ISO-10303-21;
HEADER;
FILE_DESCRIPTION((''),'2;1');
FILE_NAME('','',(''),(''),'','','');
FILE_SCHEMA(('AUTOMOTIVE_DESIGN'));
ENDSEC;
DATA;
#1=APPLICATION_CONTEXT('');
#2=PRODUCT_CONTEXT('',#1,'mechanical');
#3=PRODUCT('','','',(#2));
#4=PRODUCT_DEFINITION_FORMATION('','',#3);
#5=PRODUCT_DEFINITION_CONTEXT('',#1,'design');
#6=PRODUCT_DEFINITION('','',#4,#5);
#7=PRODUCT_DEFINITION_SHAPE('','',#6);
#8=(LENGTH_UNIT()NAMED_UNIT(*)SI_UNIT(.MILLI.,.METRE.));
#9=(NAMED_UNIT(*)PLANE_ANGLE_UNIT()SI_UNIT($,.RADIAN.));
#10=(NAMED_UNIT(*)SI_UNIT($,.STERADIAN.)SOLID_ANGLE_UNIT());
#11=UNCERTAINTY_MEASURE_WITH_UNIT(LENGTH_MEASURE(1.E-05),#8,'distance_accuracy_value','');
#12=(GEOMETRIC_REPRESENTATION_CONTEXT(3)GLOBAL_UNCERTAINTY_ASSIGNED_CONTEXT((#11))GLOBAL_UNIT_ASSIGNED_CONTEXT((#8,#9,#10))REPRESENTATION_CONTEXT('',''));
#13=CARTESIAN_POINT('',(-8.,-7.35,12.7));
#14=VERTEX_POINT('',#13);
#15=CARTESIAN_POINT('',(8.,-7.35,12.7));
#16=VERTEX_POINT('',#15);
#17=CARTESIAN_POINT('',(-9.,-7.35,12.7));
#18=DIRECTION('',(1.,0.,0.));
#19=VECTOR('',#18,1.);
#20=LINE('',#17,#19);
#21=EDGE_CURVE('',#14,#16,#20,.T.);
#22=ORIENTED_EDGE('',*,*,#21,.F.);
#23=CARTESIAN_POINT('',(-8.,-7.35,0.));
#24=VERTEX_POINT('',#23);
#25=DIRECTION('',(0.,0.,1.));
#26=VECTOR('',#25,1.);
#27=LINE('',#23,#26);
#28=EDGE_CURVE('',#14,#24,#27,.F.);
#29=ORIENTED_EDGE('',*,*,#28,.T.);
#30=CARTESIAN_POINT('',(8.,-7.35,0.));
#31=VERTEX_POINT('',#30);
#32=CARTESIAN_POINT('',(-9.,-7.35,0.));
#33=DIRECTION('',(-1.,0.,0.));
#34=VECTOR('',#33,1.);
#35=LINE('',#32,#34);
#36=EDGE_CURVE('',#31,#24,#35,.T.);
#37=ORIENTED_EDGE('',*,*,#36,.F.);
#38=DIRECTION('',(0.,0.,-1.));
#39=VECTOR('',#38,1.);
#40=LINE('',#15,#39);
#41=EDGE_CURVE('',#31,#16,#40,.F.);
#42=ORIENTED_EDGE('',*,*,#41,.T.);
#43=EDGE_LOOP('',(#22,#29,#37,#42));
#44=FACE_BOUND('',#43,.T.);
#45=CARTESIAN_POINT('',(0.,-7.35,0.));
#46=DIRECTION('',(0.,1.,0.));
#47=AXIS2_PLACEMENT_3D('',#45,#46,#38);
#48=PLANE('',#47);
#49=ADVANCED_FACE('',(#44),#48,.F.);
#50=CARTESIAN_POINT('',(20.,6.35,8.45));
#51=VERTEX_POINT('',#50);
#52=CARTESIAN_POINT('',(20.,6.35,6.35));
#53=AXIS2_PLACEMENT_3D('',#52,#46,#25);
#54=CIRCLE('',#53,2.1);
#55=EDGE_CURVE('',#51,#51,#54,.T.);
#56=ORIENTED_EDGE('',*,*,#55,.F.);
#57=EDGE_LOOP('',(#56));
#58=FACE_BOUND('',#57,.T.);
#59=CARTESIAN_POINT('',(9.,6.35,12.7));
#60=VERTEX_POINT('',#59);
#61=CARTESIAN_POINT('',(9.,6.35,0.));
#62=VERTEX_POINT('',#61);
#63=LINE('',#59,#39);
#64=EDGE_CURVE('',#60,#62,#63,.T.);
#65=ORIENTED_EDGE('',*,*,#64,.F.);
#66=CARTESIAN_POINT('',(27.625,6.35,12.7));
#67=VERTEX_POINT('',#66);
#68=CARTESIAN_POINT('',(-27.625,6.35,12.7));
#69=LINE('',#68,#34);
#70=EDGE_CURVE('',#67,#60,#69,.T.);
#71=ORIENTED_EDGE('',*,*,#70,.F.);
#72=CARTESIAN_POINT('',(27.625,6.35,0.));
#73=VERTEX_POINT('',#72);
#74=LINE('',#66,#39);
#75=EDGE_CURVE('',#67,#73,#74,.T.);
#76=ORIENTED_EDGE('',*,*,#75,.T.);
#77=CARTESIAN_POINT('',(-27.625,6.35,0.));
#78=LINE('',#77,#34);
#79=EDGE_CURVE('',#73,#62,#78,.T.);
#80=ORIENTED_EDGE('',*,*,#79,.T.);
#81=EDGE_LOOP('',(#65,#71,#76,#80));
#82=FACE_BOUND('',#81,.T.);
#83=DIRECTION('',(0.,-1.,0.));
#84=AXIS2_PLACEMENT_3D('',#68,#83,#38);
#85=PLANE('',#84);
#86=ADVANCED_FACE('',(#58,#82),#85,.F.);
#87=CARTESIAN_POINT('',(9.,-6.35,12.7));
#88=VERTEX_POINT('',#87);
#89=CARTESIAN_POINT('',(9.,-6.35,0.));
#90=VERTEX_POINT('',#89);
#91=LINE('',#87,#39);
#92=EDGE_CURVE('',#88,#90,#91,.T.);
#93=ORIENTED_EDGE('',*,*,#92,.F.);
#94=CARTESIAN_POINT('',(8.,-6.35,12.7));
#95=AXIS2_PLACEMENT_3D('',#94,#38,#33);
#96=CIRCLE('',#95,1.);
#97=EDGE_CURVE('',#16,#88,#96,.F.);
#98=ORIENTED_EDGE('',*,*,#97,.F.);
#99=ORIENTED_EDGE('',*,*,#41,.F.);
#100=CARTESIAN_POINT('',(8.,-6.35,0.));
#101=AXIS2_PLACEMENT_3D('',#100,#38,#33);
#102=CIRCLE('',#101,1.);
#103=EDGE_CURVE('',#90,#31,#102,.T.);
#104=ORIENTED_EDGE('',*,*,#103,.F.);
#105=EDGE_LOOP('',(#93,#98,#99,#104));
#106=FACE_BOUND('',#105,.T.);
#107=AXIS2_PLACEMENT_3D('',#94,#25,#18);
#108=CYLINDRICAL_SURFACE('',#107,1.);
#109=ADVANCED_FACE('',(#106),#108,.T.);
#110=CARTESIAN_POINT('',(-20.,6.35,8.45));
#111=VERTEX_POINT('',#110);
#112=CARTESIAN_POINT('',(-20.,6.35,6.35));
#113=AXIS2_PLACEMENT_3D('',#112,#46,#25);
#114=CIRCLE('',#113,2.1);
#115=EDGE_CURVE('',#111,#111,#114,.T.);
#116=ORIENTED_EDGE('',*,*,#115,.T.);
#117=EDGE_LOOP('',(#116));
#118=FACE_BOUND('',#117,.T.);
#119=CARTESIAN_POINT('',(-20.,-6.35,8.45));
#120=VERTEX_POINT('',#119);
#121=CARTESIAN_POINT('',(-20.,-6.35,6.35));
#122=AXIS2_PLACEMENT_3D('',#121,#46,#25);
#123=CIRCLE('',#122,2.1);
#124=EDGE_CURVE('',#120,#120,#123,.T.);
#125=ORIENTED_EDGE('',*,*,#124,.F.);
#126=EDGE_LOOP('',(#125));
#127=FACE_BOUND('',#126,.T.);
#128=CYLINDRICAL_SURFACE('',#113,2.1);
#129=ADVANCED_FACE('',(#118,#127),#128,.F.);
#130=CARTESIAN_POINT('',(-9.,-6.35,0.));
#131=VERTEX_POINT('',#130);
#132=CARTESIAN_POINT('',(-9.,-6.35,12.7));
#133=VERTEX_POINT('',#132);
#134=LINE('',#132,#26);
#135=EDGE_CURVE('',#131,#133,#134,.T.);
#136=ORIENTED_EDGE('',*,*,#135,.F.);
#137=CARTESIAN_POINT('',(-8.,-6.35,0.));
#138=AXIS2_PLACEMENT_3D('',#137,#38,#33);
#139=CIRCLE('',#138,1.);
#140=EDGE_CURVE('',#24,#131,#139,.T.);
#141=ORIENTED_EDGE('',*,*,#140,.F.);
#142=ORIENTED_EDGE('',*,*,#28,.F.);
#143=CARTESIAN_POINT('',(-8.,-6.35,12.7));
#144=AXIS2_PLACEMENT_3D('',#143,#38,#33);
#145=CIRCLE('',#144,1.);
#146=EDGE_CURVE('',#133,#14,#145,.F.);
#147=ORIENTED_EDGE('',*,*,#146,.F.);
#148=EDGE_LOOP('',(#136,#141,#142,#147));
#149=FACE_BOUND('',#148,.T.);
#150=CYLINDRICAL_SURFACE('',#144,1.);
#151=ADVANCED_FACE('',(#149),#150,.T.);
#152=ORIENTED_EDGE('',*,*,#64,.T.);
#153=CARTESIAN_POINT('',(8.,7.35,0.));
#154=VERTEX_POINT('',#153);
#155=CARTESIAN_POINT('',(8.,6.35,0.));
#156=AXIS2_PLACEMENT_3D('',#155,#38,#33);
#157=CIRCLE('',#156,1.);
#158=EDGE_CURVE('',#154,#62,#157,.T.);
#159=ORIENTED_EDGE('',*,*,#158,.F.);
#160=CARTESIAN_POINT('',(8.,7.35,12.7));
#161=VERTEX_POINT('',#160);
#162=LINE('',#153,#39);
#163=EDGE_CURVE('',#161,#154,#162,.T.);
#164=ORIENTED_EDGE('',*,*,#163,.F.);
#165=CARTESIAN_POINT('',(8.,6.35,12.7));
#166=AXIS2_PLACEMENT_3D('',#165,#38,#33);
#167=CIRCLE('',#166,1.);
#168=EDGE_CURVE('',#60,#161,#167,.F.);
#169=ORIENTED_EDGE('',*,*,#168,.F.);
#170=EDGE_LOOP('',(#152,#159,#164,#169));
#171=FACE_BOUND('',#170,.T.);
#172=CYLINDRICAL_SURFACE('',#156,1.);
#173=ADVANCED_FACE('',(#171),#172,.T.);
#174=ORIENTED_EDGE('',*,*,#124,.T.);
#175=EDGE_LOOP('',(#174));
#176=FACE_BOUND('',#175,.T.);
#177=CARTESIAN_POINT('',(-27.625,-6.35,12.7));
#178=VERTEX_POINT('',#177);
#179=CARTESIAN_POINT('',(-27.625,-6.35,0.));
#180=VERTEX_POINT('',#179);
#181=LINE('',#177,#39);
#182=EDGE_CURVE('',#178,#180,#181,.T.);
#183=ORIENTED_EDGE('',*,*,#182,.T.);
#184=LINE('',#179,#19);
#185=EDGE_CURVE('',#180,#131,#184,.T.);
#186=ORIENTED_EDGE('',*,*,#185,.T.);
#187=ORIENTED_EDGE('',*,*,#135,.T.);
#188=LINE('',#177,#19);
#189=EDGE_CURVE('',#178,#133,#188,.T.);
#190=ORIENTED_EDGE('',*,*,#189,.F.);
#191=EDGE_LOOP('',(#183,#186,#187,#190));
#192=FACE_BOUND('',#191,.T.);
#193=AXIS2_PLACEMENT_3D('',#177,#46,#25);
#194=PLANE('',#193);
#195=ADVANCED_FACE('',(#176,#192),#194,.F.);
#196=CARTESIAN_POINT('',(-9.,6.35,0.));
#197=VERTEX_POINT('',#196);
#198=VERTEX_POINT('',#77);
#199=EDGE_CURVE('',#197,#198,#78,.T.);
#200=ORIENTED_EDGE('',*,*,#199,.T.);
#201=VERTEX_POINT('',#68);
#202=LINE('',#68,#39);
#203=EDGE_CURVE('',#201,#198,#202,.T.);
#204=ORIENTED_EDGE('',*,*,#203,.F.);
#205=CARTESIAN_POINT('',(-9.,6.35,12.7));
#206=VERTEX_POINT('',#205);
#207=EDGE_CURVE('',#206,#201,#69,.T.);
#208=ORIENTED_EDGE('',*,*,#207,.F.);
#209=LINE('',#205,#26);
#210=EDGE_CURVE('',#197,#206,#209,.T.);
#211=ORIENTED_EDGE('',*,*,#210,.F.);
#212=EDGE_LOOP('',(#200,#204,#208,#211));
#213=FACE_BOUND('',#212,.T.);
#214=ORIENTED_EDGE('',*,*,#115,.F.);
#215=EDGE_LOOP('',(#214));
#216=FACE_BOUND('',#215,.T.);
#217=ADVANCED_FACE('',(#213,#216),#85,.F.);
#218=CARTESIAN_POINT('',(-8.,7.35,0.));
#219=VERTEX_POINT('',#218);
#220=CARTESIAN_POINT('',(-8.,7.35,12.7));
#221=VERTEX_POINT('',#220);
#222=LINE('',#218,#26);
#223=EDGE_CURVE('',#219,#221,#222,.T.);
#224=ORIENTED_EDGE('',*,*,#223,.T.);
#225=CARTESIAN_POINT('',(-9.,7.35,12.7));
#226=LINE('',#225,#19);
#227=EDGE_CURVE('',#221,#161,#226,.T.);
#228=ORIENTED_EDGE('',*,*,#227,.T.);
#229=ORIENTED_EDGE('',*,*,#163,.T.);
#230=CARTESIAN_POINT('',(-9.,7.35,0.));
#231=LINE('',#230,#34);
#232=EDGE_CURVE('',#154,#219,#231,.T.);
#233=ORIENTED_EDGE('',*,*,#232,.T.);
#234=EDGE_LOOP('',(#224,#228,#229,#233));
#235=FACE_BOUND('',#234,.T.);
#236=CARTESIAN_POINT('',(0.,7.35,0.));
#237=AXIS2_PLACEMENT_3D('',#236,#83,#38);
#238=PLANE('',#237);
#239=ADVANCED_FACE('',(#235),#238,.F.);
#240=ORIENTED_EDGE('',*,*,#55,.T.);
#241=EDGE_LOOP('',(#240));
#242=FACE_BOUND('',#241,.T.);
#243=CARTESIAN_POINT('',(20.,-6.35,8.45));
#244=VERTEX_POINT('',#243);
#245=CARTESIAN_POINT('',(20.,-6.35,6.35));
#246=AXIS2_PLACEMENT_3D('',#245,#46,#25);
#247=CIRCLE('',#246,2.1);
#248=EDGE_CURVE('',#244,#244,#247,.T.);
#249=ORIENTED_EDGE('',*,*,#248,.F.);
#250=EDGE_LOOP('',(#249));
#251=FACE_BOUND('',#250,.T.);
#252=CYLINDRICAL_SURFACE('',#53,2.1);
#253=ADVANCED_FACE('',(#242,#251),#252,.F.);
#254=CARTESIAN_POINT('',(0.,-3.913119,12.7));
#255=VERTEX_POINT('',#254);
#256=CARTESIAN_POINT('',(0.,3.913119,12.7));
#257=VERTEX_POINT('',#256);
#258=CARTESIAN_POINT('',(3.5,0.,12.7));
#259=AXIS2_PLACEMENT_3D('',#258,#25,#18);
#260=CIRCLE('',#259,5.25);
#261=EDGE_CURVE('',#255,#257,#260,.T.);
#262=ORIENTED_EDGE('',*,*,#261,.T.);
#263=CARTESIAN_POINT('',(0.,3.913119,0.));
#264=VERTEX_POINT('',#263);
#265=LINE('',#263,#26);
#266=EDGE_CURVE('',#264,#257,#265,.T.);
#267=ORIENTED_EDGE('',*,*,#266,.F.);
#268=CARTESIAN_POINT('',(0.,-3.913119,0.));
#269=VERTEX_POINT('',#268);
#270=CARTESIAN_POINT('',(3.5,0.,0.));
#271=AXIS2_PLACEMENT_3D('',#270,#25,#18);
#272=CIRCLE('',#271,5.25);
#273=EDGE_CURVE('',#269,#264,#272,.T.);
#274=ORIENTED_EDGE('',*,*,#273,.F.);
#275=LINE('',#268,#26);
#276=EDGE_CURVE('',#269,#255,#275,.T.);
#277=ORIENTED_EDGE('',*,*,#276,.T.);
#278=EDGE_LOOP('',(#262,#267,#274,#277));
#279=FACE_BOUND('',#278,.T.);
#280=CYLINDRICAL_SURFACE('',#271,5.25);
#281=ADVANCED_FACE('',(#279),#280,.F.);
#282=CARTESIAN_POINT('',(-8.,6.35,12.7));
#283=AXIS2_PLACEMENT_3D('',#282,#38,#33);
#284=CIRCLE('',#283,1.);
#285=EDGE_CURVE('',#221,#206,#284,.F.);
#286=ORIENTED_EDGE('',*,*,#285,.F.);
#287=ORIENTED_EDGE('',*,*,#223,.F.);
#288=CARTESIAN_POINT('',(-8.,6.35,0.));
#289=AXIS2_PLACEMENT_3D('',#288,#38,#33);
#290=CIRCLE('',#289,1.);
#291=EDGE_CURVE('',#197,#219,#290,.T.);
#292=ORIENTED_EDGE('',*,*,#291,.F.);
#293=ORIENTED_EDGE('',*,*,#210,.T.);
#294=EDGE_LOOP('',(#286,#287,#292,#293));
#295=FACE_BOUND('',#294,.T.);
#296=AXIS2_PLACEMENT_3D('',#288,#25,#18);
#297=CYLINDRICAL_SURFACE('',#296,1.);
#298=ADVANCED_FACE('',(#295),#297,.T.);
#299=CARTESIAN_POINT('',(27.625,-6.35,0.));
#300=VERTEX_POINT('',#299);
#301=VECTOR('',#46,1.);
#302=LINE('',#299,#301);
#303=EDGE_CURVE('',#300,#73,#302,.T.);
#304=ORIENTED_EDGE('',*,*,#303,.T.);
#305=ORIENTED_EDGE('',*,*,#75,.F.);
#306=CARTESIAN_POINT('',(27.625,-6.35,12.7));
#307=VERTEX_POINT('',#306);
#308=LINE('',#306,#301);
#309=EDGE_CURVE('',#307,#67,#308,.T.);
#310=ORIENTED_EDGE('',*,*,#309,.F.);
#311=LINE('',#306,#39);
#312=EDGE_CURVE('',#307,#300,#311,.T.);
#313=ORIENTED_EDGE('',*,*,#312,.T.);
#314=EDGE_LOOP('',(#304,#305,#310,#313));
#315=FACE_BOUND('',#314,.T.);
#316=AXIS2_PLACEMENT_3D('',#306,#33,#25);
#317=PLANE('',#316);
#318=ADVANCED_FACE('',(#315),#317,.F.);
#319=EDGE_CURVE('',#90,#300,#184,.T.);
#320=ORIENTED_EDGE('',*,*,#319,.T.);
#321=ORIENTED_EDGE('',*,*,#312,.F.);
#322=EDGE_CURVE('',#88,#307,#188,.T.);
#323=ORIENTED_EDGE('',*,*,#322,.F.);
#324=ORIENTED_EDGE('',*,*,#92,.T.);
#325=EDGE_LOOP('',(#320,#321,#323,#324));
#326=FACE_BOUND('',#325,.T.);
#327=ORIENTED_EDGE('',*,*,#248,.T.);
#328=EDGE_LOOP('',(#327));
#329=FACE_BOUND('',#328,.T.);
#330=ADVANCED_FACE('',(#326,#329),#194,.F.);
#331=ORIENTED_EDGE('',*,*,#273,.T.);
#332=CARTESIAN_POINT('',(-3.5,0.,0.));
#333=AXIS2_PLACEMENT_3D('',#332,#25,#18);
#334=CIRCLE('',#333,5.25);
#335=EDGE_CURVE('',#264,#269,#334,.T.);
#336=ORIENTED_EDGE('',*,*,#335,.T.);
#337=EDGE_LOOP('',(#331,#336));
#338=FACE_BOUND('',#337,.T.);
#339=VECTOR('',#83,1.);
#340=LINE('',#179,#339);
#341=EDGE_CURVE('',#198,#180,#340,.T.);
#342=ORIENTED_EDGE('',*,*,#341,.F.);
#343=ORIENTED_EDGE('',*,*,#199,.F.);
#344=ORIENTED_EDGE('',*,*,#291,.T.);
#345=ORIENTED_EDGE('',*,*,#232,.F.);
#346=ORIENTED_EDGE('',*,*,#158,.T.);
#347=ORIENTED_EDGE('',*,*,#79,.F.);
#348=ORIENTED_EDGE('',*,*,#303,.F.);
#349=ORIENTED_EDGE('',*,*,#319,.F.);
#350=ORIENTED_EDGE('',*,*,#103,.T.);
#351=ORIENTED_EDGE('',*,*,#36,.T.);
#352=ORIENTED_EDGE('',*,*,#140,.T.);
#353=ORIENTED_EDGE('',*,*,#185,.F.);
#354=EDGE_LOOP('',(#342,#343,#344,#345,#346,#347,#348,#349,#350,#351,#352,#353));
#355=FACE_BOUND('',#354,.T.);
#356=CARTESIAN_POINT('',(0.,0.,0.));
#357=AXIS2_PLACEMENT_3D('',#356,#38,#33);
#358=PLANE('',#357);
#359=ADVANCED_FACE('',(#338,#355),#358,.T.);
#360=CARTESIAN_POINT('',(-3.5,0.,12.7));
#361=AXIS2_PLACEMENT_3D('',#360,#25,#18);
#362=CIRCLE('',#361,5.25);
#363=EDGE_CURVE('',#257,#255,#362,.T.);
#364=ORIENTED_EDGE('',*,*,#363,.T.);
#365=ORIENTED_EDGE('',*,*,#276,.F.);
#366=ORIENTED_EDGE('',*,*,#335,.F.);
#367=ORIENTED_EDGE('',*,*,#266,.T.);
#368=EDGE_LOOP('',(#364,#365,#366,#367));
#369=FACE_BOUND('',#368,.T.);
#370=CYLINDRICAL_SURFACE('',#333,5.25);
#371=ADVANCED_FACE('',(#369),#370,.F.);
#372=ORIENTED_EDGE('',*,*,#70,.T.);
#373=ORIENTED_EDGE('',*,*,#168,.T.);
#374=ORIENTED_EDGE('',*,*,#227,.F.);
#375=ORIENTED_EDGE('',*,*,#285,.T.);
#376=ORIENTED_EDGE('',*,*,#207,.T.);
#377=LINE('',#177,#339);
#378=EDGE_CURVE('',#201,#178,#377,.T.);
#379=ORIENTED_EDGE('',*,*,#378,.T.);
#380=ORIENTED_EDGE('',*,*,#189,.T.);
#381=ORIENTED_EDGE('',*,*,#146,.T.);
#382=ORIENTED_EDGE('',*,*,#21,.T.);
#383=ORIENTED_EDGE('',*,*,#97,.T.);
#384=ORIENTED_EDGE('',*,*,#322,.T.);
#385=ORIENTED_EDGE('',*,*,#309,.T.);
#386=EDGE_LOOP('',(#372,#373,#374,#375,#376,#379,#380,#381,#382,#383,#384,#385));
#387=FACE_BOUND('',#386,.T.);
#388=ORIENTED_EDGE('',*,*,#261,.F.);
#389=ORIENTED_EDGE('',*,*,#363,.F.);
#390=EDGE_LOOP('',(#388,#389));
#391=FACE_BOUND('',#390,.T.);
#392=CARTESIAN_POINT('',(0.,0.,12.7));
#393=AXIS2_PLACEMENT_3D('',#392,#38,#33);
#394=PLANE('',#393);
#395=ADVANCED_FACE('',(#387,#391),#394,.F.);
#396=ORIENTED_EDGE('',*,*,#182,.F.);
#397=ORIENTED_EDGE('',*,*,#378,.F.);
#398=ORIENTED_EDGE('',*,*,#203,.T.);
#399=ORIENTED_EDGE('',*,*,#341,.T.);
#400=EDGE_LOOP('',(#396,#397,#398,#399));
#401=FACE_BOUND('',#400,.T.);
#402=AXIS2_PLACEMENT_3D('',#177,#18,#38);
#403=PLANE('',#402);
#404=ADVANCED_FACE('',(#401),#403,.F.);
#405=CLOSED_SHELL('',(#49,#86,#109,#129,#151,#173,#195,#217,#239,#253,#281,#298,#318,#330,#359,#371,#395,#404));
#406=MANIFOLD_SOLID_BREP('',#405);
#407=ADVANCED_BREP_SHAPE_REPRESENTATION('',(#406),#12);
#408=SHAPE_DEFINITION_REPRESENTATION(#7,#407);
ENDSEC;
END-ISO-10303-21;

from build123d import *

# Parameters (mm, degrees)
SKETCH1_W             = 55.25
SKETCH1_H             = 12.7
BOSS_EXTRUDE1_DEPTH   = 12.7
M5X0_8_TAPPED_HOLE1_D = 4.2
CUT_EXTRUDE1_DEPTH    = 32.060475286
SKETCH5_W             = 18
SKETCH5_H             = 12.7
BOSS_EXTRUDE2_DEPTH   = 1
FILLET1_R             = 1


with BuildPart() as part:
    # Sketch1 → Boss-Extrude1 (new body)
    with BuildSketch(Plane.XY):
        Rectangle(SKETCH1_W, SKETCH1_H)
    extrude(amount=BOSS_EXTRUDE1_DEPTH)

    # M5x0.8 Tapped Hole1 (through all)
    with Locations(Plane(origin=(-20, 6.35, 6.35), x_dir=(0, 0, 1), z_dir=(0, 1, 0))):
        with Locations((0, 0), (0, 40)):
            Hole(M5X0_8_TAPPED_HOLE1_D / 2)

    # Sketch4 → Cut-Extrude1 (cut, through all)
    with BuildSketch(Plane.XY.offset(12.7)):
        with BuildLine():
            ThreePointArc((0, 3.913118961), (-8.75, 0), (0, -3.913118961))
            ThreePointArc((0, -3.913118961), (8.75, 0), (0, 3.913118961))
        make_face()
    extrude(amount=-CUT_EXTRUDE1_DEPTH, mode=Mode.SUBTRACT)

    # Sketch5 → Boss-Extrude2 (add)
    with BuildSketch(Plane(origin=(0, 6.35, 0), x_dir=(1, 0, 0), z_dir=(0, 1, 0))):
        with Locations((0, -6.35)):
            Rectangle(SKETCH5_W, SKETCH5_H)
    boss_extrude2 = extrude(amount=BOSS_EXTRUDE2_DEPTH)

    # Mirror1: Boss-Extrude2 across plane
    add(boss_extrude2.mirror(Plane.ZX))

    # Fillet1
    fillet1_edges = [part.edges().sort_by_distance(p)[0] for p in [
        (9, -7.35, 6.35),
        (-9, -7.35, 6.35),
        (-9, 7.35, 6.35),
        (9, 7.35, 6.35),
    ]]
    fillet(fillet1_edges, radius=FILLET1_R - 0.0001)  # a hair under: the kernel refuses the full size


solid = part.part
